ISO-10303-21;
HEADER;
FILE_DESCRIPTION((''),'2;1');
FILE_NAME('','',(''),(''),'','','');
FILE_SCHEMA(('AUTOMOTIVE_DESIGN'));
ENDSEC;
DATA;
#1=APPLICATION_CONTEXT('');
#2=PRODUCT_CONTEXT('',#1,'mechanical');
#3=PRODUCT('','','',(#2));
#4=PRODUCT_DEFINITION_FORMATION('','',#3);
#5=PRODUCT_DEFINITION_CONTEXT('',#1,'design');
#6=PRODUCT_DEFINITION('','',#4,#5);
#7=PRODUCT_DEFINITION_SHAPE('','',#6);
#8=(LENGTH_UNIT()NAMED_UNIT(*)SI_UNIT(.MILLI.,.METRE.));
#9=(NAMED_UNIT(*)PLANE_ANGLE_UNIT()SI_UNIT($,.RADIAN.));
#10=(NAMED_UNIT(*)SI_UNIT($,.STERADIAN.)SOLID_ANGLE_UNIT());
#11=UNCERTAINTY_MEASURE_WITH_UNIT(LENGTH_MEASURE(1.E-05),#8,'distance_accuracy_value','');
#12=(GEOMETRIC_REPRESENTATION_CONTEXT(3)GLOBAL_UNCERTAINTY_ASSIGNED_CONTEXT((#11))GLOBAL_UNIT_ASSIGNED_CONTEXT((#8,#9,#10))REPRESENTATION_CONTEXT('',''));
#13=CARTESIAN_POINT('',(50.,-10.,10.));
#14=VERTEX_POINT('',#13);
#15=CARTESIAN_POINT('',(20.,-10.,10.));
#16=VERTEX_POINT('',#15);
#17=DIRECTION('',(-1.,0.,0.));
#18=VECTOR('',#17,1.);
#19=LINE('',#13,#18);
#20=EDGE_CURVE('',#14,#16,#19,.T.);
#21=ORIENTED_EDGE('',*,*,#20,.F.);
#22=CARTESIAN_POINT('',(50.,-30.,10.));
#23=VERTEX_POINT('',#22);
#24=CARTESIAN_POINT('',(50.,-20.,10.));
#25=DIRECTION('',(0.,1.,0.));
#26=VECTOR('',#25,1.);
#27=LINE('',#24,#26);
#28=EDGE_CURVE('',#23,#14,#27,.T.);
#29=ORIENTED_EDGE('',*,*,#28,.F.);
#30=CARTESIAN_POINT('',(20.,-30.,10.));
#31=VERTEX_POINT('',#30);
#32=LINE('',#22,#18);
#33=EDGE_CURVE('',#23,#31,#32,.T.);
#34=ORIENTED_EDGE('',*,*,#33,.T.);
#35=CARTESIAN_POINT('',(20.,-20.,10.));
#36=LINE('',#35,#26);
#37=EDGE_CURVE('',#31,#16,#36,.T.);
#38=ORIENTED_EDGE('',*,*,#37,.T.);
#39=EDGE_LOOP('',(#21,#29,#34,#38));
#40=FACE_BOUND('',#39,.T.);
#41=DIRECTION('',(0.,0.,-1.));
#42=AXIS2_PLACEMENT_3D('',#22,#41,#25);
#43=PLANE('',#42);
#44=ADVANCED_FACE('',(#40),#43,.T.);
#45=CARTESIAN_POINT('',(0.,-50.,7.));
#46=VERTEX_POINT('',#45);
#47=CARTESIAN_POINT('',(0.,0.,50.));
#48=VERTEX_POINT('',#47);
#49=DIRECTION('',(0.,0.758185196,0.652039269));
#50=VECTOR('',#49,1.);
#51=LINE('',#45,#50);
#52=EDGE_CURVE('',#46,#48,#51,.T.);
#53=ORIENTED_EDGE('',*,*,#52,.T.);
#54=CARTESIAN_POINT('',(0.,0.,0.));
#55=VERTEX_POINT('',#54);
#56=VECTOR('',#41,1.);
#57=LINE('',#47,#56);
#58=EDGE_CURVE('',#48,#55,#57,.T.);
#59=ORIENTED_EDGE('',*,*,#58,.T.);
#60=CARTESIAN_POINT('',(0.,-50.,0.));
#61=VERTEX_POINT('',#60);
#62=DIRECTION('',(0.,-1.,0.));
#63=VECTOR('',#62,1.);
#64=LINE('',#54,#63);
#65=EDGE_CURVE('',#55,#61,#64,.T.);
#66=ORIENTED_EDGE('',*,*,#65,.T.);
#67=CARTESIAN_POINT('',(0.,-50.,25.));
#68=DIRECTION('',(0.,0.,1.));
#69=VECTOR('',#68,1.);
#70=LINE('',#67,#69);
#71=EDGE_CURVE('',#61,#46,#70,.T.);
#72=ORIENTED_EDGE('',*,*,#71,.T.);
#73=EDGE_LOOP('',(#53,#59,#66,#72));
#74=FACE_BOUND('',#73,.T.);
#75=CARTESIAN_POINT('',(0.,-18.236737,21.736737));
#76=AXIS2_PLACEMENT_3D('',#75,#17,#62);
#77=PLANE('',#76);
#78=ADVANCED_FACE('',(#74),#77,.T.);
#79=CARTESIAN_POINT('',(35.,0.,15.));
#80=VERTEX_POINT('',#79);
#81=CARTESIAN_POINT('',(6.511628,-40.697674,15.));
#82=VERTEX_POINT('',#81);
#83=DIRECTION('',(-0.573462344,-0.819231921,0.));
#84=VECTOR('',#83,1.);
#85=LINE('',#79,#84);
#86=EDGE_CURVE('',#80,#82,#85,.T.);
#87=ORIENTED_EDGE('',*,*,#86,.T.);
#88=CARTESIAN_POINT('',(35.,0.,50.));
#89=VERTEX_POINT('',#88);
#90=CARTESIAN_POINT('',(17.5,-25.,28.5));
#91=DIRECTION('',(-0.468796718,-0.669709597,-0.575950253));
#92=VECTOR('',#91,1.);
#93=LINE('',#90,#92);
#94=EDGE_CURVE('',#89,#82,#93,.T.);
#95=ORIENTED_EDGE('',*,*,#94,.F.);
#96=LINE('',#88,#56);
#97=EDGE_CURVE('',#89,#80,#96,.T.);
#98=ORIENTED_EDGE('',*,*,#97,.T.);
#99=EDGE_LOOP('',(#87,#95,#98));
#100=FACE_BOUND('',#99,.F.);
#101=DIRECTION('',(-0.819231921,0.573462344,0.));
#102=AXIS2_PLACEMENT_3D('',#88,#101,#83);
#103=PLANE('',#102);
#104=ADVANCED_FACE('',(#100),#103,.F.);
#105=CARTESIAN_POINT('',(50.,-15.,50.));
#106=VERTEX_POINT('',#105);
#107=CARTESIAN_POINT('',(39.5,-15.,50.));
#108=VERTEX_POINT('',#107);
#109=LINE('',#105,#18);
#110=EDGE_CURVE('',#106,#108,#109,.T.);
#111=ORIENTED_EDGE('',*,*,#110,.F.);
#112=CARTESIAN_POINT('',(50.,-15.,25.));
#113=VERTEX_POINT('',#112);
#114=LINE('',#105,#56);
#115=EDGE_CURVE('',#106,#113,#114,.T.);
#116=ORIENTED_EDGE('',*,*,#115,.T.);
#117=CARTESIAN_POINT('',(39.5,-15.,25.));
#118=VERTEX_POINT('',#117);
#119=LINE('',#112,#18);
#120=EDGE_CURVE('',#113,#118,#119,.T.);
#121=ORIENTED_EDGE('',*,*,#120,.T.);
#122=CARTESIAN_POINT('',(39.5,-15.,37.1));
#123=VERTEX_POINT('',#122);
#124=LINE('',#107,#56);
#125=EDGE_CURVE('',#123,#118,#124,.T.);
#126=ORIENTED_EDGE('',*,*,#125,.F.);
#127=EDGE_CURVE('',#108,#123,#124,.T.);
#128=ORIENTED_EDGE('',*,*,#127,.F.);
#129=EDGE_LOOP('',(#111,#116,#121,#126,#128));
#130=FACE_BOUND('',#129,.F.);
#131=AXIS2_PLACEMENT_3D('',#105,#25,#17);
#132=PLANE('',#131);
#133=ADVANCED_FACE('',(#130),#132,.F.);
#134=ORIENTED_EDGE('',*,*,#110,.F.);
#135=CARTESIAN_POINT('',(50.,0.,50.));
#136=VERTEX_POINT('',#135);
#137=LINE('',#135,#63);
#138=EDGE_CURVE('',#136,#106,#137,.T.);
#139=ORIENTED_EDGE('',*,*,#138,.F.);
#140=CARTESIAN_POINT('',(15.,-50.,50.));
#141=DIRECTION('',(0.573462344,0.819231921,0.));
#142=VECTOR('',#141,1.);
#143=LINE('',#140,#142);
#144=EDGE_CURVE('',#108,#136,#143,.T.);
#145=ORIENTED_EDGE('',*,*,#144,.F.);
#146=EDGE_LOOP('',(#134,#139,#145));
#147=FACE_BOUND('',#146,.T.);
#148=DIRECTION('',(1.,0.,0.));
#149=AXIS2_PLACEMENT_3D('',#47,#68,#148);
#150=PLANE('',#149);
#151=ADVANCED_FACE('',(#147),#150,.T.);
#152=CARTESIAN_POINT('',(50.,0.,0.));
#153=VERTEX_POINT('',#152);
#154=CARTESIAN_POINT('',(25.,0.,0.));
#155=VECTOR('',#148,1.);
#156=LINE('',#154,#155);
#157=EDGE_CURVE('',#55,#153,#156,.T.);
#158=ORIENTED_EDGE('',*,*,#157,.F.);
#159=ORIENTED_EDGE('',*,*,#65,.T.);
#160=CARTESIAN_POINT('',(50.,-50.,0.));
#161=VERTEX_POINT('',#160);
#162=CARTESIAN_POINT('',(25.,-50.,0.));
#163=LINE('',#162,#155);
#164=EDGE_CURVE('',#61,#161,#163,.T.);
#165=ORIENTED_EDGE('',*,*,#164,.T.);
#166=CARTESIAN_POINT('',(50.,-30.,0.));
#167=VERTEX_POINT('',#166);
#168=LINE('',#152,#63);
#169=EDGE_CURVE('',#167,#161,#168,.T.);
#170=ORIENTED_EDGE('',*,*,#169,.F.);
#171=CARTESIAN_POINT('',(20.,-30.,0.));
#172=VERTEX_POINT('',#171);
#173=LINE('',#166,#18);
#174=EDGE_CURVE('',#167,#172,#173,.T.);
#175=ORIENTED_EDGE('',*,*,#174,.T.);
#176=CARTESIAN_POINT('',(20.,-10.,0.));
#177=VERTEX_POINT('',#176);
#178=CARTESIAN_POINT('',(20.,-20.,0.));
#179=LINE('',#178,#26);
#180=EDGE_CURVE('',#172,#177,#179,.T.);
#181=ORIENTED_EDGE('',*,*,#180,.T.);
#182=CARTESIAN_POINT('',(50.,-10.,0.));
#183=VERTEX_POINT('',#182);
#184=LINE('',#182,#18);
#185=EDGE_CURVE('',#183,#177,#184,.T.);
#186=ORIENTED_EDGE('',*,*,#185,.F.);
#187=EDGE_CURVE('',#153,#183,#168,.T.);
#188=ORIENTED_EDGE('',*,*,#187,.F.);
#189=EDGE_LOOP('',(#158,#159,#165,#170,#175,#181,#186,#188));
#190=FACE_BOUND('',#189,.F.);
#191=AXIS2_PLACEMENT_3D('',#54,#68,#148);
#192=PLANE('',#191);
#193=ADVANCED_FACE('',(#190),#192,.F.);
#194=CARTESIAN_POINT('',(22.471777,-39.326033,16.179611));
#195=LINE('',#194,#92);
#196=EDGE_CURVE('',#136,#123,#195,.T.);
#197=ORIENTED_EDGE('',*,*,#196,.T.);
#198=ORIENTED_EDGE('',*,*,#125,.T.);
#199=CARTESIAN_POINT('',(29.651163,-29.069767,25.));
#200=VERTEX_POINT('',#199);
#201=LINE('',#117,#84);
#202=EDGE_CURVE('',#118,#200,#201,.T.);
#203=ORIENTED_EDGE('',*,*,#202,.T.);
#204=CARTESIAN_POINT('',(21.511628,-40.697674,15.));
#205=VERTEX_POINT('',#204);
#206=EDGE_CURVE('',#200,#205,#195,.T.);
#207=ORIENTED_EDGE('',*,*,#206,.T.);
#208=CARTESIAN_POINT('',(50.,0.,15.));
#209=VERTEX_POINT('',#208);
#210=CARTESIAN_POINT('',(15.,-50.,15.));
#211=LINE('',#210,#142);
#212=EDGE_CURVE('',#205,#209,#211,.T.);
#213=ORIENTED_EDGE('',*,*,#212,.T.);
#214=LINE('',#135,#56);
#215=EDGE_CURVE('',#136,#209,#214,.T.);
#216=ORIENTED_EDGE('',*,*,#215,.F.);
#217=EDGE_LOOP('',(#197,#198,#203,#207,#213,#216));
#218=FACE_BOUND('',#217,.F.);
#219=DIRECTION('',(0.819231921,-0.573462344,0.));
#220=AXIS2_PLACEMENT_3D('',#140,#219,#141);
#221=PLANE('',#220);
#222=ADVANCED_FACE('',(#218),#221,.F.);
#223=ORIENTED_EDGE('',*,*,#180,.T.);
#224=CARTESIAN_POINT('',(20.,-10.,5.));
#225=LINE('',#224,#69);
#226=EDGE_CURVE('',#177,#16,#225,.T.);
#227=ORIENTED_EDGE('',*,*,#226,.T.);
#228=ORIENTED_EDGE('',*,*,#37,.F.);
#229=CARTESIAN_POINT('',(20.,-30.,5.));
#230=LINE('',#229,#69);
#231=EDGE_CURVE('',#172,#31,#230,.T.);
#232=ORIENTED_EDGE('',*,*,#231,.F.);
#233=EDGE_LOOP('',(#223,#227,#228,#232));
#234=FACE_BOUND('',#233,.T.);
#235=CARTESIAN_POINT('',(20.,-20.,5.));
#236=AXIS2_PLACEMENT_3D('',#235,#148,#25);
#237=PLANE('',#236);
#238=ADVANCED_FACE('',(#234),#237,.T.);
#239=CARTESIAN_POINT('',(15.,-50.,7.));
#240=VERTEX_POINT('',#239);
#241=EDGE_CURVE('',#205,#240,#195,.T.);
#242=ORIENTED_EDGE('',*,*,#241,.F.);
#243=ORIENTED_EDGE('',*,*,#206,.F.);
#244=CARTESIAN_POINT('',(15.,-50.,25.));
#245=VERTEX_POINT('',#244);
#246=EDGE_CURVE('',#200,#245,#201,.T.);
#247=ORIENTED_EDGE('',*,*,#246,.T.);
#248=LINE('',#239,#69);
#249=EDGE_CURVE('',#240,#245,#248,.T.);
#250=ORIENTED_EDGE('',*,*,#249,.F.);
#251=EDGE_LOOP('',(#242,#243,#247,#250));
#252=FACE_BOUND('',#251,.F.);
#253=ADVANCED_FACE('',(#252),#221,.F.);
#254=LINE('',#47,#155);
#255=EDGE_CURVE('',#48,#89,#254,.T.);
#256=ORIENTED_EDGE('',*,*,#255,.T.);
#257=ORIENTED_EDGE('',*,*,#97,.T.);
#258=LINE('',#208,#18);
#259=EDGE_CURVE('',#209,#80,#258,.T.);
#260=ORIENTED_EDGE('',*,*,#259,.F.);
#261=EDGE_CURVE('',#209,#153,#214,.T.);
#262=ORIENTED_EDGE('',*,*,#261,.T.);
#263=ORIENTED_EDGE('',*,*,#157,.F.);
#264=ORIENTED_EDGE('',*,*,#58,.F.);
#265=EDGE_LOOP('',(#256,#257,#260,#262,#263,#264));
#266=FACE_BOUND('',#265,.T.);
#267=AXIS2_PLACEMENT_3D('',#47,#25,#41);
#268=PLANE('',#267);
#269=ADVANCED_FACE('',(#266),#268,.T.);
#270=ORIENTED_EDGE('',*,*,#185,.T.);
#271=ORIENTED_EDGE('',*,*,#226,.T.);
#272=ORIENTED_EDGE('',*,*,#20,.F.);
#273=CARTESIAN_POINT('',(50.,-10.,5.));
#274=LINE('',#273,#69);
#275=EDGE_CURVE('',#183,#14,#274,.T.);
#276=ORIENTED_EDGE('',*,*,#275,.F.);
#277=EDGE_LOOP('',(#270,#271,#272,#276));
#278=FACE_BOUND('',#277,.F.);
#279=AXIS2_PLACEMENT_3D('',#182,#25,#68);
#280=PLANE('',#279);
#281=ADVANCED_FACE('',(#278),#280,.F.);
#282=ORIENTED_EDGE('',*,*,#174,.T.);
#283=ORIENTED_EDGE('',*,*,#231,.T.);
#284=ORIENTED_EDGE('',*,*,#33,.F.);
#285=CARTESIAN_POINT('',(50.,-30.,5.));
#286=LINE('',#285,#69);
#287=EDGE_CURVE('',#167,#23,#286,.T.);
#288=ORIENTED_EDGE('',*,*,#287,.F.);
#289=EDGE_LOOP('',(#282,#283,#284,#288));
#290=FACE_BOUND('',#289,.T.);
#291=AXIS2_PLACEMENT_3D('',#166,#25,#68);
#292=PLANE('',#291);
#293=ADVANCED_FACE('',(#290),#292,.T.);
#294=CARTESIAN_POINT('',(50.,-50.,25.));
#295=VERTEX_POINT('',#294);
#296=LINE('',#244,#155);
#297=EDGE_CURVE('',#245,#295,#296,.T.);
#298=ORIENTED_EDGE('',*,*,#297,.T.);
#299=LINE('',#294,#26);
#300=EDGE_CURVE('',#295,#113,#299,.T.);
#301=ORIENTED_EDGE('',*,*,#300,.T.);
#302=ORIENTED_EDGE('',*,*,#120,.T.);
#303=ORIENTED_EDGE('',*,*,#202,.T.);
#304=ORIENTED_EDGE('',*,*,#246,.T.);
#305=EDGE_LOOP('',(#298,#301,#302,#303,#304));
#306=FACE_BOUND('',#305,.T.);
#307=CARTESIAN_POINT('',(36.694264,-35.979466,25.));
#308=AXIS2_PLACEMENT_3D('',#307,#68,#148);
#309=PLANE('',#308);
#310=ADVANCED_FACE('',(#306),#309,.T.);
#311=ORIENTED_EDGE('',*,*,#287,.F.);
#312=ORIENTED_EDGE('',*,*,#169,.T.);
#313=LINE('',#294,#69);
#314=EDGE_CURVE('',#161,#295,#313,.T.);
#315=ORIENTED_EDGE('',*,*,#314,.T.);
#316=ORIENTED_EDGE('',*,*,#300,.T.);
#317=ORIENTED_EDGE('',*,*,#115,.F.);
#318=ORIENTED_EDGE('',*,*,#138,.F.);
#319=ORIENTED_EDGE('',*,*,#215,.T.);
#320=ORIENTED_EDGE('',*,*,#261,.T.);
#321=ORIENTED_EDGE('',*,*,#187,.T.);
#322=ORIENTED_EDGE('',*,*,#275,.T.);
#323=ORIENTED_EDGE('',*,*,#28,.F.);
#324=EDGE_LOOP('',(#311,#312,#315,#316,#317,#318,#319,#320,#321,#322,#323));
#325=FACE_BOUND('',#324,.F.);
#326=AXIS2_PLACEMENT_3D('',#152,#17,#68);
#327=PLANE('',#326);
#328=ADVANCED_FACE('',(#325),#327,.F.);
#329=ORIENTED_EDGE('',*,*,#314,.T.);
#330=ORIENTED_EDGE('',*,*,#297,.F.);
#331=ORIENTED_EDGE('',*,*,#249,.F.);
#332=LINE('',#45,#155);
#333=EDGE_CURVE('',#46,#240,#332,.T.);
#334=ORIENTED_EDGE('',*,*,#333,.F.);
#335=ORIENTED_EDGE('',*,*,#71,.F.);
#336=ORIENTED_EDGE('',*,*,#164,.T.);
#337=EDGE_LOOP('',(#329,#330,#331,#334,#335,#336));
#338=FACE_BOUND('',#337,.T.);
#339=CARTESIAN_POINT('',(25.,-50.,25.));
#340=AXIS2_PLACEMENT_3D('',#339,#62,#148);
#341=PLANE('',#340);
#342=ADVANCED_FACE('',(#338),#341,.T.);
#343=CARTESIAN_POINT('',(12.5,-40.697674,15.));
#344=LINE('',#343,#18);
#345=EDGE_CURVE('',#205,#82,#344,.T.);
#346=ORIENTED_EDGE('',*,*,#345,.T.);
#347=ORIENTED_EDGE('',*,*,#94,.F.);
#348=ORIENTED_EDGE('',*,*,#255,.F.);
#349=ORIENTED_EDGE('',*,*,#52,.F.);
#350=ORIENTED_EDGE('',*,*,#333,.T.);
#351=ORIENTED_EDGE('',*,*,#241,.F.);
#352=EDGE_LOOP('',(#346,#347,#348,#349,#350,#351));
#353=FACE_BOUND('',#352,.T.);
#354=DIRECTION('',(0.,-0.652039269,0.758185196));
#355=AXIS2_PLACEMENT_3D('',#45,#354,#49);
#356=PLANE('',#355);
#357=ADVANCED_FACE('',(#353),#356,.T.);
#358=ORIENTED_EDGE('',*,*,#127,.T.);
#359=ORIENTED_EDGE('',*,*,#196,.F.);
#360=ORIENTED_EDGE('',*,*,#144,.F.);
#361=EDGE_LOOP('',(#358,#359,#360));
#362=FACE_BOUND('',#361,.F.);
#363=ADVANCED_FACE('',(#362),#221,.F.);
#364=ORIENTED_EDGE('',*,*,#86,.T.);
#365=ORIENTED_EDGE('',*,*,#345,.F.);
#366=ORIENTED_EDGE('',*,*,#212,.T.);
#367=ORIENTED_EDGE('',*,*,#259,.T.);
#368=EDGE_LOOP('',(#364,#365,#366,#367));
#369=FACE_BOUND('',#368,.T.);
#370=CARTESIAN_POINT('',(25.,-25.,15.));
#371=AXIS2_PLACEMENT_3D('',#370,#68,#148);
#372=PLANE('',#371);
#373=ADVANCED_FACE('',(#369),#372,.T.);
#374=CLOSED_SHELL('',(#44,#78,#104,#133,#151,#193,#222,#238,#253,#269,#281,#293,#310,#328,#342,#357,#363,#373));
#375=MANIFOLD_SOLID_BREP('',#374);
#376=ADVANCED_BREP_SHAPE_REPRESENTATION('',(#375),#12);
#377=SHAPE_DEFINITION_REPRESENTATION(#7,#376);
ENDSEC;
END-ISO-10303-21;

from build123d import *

# Parameters (mm, degrees)
F0_W      = 50
F0_H      = 50
F1_DEPTH  = 50
F3_DEPTH  = 43
F5_DEPTH  = 25
F6_DEPTH  = 43
F8_REACH  = 115.9479483752
F12_DEPTH = 35
F13_W     = 20
F13_H     = 10
F14_DEPTH = 30


with BuildPart() as f1:
    # F0 (on Front) → F1 (new body)
    with BuildSketch(Plane.XZ):
        with Locations((25, 25)):
            Rectangle(F0_W, F0_H)
    extrude(amount=F1_DEPTH)

    # F2 (on face) → F3 (cut)
    with BuildSketch(Plane.XY.offset(50)):
        Polygon((15, -50), (50, 0), (35, 0), (0, -50), align=None)
    extrude(amount=-F3_DEPTH, mode=Mode.SUBTRACT)

    # F4 (on face) → F5 (cut)
    with BuildSketch(Plane.XY.offset(50)):
        Polygon((50, -50), (50, -15), (39.5, -15), (15, -50), align=None)
    extrude(amount=-F5_DEPTH, mode=Mode.SUBTRACT)

    # F6 (cut): a face of the model
    f6_faces = [f1.faces().sort_by_distance(p)[0] for p in [
        (11.6666666667, -16.6666666667, 50),
    ]]
    extrude(f6_faces, amount=-F6_DEPTH, mode=Mode.SUBTRACT)

    f8_end = Plane(origin=(36.1029411765, -19.8529411765, 22.3235294118), x_dir=(-0.5734623444, -0.8192319205, 0), z_dir=(-0.8192319205, 0.5734623444, 0))
    # F7 (on face) → F8 (join, up to a plane its end follows)
    with BuildSketch(Plane(origin=(0, 0, 0), x_dir=(0, -1, 0), z_dir=(-1, 0, 0))):
        Polygon((50, 7), (0, 50), (0, 7), align=None)
    f8_long = extrude(amount=-F8_REACH, mode=Mode.PRIVATE)
    add(split(f8_long, bisect_by=f8_end, keep=Keep.TOP, mode=Mode.PRIVATE))

    # F10 (on plane+point) → F12 (cut, through all)
    with BuildSketch(Plane.XY.offset(50)):
        Polygon((15, -50), (50.0000000002, 0), (35.0000000002, 0), (0, -50), align=None)
    extrude(amount=-F12_DEPTH, mode=Mode.SUBTRACT)

    # F13 (on face) → F14 (cut)
    with BuildSketch(Plane.YZ.offset(50)):
        with Locations((-20, 5)):
            Rectangle(F13_W, F13_H)
    extrude(amount=-F14_DEPTH, mode=Mode.SUBTRACT)


solid = f1.part
